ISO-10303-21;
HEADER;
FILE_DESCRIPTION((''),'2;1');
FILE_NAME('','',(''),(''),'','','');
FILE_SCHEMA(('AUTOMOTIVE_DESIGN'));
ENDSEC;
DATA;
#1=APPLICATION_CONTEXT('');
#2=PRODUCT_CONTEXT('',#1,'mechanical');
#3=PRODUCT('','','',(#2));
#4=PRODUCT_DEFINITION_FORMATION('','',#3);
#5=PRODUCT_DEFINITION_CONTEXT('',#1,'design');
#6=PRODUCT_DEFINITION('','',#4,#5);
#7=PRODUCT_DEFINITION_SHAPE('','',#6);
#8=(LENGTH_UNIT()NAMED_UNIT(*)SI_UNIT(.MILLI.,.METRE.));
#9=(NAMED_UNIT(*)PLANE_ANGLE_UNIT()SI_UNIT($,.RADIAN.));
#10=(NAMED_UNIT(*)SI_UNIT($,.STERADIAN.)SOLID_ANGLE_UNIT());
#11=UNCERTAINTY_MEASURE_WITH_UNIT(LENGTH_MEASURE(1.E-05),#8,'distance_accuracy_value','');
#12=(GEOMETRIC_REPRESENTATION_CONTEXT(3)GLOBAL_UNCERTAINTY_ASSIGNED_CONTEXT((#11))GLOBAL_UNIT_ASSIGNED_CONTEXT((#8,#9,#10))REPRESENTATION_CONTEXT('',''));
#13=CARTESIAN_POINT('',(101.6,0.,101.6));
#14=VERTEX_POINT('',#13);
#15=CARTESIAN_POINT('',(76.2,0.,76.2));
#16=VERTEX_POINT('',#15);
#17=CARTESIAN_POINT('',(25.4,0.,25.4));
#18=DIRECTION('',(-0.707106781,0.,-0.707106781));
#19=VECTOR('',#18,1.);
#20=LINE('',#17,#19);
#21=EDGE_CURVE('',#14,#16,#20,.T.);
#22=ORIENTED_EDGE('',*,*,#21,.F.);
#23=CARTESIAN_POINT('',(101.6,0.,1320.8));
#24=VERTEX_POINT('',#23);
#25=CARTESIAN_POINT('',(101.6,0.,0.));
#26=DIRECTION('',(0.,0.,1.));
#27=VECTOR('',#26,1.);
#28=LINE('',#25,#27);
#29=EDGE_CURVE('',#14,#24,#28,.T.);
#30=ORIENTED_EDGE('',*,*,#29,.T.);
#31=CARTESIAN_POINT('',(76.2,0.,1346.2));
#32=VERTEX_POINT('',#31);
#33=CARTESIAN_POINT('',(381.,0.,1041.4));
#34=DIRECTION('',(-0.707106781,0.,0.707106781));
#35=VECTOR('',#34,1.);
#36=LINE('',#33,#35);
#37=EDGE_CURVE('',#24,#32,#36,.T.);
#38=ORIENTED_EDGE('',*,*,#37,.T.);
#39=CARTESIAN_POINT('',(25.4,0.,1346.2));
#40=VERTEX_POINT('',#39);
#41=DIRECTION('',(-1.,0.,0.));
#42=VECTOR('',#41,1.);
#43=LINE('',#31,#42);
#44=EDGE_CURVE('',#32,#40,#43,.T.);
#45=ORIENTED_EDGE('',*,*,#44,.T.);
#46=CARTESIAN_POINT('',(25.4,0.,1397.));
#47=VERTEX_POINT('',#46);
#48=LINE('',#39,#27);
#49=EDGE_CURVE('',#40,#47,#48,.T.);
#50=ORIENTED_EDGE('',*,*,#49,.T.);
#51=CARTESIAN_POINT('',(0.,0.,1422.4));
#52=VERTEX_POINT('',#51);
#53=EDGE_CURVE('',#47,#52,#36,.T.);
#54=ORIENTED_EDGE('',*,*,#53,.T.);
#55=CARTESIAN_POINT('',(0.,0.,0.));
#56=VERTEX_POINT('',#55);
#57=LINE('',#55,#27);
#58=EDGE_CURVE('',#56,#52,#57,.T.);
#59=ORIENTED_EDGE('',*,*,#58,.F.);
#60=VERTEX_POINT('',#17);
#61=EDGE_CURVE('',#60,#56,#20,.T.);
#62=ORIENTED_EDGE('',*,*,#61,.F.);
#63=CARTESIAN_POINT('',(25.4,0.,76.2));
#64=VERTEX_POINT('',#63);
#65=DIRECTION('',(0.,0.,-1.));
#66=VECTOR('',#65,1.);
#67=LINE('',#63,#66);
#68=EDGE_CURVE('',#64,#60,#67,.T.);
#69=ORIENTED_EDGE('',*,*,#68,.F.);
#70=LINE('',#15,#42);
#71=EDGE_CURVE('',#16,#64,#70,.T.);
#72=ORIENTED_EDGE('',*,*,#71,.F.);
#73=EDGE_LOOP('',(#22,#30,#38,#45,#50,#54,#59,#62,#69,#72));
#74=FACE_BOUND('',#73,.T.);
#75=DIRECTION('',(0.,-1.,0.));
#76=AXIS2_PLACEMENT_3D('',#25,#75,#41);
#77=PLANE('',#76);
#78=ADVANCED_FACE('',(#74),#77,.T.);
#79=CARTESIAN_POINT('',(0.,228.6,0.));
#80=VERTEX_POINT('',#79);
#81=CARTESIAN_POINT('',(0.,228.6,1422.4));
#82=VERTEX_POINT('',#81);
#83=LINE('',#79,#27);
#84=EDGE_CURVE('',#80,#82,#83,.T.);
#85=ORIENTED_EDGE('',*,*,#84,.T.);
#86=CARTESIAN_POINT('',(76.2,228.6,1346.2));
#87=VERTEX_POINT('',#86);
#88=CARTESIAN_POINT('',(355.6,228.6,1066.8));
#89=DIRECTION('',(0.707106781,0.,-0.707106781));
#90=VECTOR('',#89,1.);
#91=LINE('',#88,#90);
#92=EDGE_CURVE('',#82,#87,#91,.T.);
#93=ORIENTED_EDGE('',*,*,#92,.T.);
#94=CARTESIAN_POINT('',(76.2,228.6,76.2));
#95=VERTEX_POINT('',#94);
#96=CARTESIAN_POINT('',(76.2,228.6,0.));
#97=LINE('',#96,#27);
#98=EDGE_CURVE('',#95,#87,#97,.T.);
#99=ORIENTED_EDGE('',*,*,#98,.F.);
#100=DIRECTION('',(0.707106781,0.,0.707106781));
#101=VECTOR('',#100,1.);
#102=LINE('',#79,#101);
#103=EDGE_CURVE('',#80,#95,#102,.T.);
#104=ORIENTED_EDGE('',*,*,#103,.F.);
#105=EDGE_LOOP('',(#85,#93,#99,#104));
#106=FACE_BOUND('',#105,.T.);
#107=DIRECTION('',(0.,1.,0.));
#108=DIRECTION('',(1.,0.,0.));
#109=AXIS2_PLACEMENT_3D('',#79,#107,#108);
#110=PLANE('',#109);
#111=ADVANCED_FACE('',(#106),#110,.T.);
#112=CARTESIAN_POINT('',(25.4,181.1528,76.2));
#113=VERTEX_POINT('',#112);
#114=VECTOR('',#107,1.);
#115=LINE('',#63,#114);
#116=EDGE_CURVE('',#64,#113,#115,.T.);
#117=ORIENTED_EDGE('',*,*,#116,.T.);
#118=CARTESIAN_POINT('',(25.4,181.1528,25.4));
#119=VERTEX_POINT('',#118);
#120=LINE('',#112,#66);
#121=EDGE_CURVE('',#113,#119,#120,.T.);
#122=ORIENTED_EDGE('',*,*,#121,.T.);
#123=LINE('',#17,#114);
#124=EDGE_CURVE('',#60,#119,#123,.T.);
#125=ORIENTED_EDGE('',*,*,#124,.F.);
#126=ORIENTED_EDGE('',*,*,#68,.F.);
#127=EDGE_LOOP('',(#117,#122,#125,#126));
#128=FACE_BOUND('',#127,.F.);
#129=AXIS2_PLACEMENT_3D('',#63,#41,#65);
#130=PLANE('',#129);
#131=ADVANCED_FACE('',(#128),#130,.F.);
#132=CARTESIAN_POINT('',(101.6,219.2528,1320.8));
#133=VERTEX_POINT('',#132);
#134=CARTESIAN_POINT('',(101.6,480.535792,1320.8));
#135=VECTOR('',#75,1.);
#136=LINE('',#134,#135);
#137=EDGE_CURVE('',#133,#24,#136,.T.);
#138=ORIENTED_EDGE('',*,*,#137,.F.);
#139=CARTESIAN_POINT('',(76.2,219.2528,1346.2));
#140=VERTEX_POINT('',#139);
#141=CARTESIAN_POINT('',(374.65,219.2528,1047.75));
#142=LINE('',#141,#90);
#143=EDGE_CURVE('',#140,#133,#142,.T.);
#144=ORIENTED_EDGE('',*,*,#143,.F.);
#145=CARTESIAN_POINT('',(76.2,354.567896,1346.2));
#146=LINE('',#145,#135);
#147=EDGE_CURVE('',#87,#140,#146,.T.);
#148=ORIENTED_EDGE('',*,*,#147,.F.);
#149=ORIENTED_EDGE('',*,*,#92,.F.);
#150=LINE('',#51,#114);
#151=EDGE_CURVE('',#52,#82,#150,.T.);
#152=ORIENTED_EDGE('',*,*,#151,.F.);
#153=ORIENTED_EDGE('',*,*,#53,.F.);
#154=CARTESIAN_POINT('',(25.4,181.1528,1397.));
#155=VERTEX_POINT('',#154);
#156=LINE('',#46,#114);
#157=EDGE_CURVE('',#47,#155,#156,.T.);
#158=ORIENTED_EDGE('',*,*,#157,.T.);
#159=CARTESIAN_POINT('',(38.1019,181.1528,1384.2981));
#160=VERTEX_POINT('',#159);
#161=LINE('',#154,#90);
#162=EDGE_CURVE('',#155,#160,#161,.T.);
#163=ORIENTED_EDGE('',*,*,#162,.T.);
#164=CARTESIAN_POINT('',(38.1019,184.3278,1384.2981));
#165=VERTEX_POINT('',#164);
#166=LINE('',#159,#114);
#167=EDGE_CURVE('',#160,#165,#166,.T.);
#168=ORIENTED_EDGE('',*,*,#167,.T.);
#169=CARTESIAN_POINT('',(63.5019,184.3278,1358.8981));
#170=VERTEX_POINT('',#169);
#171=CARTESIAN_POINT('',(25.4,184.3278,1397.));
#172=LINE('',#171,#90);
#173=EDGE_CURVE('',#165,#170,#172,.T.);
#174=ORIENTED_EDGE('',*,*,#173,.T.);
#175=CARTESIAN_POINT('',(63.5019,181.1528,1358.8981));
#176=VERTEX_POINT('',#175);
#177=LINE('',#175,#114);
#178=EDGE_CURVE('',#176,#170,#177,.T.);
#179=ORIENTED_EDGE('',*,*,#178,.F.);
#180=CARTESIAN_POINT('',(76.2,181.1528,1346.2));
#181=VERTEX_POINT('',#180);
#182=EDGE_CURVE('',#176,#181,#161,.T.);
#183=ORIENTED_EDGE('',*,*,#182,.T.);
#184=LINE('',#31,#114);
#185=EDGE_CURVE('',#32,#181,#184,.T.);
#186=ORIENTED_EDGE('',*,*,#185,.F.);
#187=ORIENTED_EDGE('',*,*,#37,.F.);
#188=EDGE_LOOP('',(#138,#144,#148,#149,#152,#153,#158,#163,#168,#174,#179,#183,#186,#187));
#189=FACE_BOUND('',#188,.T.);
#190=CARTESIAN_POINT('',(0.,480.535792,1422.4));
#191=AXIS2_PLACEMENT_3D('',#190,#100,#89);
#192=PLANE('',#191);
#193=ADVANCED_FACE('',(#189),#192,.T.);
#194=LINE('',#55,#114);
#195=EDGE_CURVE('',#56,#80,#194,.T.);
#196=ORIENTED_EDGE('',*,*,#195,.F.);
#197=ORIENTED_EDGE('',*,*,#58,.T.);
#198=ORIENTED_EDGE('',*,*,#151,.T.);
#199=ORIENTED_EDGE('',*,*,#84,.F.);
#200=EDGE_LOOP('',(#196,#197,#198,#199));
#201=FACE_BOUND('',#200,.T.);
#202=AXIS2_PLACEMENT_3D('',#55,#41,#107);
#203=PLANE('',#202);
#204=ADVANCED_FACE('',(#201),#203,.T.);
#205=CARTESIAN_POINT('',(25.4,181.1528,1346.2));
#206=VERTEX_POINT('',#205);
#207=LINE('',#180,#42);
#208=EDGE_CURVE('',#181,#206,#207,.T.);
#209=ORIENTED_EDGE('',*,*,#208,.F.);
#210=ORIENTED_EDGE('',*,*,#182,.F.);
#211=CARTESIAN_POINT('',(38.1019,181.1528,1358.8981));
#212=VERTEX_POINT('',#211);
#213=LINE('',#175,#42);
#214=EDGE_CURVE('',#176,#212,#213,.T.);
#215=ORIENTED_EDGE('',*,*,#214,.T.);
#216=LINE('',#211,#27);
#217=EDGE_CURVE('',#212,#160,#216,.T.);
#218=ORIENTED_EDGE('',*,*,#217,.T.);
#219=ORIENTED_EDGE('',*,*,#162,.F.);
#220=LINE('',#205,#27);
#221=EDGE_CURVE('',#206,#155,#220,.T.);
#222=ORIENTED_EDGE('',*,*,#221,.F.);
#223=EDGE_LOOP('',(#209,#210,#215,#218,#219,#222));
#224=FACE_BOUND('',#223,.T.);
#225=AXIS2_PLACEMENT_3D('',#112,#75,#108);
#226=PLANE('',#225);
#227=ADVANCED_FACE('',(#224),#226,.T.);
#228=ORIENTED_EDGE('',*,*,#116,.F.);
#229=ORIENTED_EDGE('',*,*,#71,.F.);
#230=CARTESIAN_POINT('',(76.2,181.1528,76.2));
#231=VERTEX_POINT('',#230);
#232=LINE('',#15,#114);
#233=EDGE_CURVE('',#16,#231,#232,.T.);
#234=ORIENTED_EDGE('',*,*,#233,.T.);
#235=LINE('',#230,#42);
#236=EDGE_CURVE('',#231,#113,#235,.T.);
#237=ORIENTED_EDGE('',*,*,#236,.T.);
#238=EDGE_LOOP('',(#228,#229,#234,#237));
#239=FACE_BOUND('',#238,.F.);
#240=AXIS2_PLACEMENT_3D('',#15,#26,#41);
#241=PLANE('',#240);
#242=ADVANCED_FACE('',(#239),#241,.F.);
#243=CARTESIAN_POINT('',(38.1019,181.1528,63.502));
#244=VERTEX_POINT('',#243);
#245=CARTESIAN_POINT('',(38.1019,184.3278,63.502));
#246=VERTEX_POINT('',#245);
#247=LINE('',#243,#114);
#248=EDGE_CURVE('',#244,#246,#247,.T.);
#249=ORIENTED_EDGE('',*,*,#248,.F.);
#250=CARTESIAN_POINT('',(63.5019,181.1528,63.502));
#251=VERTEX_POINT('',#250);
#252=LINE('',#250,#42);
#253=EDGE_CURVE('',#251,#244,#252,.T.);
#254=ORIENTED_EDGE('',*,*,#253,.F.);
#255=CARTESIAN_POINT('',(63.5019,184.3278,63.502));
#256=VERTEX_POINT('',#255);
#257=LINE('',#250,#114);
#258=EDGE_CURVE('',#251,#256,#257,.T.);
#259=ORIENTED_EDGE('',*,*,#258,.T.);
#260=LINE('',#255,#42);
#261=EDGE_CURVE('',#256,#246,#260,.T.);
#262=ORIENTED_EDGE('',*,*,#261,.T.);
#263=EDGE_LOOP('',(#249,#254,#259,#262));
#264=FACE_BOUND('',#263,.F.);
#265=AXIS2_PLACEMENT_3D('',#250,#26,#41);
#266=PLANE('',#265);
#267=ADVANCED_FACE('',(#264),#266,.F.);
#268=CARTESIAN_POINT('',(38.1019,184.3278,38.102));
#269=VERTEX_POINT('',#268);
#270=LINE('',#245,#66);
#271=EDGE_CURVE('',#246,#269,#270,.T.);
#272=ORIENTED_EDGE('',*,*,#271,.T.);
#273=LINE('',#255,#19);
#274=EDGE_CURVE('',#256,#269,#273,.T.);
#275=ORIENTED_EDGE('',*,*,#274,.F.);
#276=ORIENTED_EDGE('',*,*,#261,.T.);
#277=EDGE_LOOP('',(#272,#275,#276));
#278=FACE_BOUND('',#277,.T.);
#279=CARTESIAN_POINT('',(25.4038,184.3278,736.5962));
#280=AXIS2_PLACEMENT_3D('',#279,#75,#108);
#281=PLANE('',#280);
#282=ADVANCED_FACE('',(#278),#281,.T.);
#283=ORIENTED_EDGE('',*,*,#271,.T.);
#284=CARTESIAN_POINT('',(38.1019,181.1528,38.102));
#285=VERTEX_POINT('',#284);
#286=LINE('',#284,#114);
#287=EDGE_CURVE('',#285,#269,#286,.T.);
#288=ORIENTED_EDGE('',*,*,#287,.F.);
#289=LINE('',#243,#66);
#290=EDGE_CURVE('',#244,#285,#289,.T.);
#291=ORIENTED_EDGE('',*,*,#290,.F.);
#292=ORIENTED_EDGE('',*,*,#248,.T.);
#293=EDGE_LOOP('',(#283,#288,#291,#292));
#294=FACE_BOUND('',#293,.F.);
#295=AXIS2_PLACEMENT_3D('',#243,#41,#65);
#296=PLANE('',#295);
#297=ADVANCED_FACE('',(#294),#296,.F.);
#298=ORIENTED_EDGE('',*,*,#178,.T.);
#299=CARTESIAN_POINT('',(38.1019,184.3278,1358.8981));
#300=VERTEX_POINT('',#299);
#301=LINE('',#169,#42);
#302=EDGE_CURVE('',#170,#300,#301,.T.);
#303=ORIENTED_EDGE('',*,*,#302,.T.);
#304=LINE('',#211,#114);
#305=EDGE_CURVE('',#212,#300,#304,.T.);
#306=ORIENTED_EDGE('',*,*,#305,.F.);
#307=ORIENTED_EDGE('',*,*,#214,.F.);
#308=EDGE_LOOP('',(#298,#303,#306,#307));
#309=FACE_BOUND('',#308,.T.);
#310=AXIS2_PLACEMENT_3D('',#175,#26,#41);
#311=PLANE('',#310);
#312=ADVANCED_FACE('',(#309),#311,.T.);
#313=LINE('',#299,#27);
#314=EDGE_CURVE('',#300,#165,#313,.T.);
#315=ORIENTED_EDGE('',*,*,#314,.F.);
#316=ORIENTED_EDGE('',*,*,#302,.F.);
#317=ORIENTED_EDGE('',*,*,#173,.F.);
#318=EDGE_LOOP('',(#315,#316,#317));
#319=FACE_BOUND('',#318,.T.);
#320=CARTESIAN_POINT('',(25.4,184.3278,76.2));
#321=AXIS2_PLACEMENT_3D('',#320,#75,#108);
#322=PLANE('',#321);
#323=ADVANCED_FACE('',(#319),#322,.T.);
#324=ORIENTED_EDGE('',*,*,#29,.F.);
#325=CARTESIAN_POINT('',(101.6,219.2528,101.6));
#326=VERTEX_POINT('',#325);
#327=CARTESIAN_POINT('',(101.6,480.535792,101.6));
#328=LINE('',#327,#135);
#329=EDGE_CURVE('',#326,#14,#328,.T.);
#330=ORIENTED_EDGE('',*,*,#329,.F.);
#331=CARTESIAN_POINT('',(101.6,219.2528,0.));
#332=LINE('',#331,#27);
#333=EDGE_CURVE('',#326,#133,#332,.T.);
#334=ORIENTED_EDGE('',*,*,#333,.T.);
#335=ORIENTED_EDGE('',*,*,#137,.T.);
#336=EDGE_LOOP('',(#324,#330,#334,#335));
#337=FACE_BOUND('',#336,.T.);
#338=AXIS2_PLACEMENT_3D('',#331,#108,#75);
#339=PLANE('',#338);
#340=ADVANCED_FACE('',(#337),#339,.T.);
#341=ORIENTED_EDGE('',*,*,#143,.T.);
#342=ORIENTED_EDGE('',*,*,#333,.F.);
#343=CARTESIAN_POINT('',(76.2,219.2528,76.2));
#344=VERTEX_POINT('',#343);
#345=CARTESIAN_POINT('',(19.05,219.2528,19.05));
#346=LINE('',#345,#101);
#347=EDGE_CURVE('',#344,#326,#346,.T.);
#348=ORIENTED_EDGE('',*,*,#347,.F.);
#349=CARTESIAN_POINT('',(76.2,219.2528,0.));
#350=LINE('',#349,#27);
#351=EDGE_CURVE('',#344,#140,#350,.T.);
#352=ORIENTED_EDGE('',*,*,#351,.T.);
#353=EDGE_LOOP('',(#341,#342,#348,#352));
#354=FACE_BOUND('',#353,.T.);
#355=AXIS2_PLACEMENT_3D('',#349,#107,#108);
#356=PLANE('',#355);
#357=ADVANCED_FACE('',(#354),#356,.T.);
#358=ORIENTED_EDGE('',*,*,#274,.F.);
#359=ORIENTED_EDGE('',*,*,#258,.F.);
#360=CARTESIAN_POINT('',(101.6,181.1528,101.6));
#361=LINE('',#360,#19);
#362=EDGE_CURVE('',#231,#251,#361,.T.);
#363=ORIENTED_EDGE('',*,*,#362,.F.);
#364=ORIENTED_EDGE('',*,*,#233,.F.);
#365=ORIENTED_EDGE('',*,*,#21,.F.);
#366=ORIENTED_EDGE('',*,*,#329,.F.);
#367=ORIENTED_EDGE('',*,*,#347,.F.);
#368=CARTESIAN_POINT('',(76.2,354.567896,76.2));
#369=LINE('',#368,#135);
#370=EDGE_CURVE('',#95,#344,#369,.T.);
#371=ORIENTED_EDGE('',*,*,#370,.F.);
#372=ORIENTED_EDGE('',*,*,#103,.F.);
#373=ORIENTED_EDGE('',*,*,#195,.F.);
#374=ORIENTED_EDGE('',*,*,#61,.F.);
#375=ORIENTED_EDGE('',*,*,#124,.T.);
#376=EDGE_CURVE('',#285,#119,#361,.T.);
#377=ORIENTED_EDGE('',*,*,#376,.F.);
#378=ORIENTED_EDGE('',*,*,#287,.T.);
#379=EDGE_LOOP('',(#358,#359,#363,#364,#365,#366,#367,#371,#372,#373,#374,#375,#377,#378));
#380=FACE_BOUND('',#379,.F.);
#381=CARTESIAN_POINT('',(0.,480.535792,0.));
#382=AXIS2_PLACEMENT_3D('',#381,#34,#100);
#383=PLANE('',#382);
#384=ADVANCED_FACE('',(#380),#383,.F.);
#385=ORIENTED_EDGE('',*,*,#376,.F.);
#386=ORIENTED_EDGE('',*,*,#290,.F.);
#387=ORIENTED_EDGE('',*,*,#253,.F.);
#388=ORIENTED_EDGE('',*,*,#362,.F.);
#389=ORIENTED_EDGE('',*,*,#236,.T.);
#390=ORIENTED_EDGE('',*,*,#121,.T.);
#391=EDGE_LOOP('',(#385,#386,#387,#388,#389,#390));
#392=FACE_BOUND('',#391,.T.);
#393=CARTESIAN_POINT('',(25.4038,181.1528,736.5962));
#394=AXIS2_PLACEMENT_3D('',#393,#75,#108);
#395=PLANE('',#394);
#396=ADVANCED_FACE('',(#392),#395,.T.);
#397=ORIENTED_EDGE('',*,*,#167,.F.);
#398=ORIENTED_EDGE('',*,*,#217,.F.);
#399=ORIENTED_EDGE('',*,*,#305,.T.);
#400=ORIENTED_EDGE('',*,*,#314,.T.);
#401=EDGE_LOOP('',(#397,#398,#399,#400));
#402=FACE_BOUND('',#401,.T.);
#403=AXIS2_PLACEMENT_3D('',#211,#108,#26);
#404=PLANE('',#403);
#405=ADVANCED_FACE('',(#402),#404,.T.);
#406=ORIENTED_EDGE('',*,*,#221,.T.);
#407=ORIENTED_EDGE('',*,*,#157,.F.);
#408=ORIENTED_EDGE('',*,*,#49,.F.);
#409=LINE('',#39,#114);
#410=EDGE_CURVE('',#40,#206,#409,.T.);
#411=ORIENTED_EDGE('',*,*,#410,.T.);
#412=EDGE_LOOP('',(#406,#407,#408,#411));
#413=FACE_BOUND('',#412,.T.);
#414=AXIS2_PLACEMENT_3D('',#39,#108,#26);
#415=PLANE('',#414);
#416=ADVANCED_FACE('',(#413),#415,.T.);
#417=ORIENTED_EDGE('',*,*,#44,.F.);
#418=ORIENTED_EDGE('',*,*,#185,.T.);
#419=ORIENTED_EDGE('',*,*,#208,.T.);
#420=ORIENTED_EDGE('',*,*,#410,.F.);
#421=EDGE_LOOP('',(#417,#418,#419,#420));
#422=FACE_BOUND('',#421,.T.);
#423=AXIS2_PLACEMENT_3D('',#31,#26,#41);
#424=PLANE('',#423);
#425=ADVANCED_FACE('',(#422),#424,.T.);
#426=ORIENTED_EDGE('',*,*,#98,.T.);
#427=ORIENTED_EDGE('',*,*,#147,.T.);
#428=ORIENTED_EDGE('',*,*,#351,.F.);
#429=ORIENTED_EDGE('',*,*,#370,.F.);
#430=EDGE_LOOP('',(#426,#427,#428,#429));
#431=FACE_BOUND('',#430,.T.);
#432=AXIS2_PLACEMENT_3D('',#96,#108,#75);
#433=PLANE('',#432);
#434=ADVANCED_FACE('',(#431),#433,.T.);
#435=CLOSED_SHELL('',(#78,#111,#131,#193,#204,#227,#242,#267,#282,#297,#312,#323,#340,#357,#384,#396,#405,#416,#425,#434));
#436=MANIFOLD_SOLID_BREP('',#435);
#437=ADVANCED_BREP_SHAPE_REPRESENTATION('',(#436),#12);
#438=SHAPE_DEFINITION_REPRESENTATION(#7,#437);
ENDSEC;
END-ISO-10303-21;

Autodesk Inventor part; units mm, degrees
ref_plane "YZ Plane" through (0, 0, 0) normal (1, 0, 0) x (0, 1, 0)
ref_plane "XZ Plane" through (0, 0, 0) normal (0, 1, 0) x (-1, 0, 0)
sketch "Sketch1" plane through (0, 0, 0) normal (0, 0, 1) x (1, 0, 0)
  line L0 (0, 0) -> (0, 228.6)
  line L1 (0, 228.6) -> (76.2, 228.6)
  line L2 (76.2, 228.6) -> (76.2, 219.2528)
  line L3 (76.2, 219.2528) -> (101.6, 219.2528)
  line L4 (101.6, 219.2528) -> (101.6, 0)
  line L5 (101.6, 0) -> (0, 0)
  dimension "d0" = 228.6
  dimension "d1" = 76.2
  dimension "d2" = 9.3472
  dimension "d3" = 25.4
extrude "Extrusion1" add sketch "Sketch1" along normal blind 1422.4
ref_plane "Work Plane2" through (25.4038, 0, 736.5962) normal (0, -1, 0) x (1, 0, 0)
sketch "Sketch7" plane through (25.4038, 0, 736.5962) normal (0, -1, 0) x (1, 0, 0)
  line L0 (76.1962, -634.9962) -> (50.7962, -660.3962)
  line L1 (50.7962, -660.3962) -> (-0.0038, -660.3962)
  line L2 (76.1962, -634.9962) -> (-25.4038, -736.5962) projected
  line L3 (76.1962, -736.5962) -> (76.1962, 584.2038) projected
  line L4 (-0.0038, -660.3962) -> (-0.0038, -711.1962)
  line L5 (-0.0038, -711.1962) -> (50.7962, -660.3962)
  dimension "d39" = 50.8
  dimension "d41" = 90
  dimension "d42" = 50.8
extrude "Extrusion5" cut sketch "Sketch7" against normal blind 181.1528
sketch "Sketch8" plane through (25.4, 0, 76.2) normal (0, -1, 0) x (1, 0, 0)
  line L0 (76.2, -76.2) -> (76.2, 1346.2) projected
  line L1 (76.2, 1244.6) -> (50.8, 1270)
  line L2 (50.8, 1270) -> (0, 1270)
  line L3 (0, 1270) -> (0, 1320.8)
  line L4 (0, 1320.8) -> (50.8, 1270)
  line L5 (-25.4, 1346.2) -> (76.2, 1244.6) projected
  point P0 (-25.4, -76.2)
  point P1 (76.2, 25.4)
  dimension "d48" = 90
  dimension "d49" = 50.8
extrude "Extrusion6" cut sketch "Sketch8" against normal blind 181.1528
chamfer "Chamfer6" distance 101.6 angle 45 1 edges at (101.6, 109.6264, 1422.4)
chamfer "Chamfer7" distance 101.6 angle 45 1 edges at (101.6, 109.6264, 0)
sketch "Sketch9" plane through (25.4, 181.1528, 76.2) normal (0, -1, 0) x (1, 0, 0)
  line L0 (32.8422, -17.9578) -> (7.4422, -17.9578)
  line L1 (7.4422, -17.9578) -> (7.4422, -43.3578)
  line L2 (32.8422, -17.9578) -> (7.4422, -43.3578)
  line L3 (-25.4, -76.2) -> (50.8, 0) projected
  line L4 (50.8, 0) -> (38.1019, -12.6981)
  line L5 (50.8, 1270) -> (76.2, 1244.6) projected
  line L6 (50.8, 1270) -> (38.1019, 1282.6981)
  line L7 (0, 1320.8) -> (50.8, 1270) projected
  line L8 (38.1019, 1282.6981) -> (12.7019, 1282.6981)
  line L9 (12.7019, 1282.6981) -> (12.7019, 1308.0981)
  line L10 (38.1019, 1282.6981) -> (12.7019, 1308.0981)
  dimension "d63" = 0
  dimension "d64" = 25.4
  dimension "d65" = 17.9578
  dimension "d66" = 17.9578
  dimension "d67" = 25.4
extrude "Extrusion7" cut sketch "Sketch9" against normal blind 3.175 contours L7 L8 L9
sketch "Sketch10" plane through (25.4038, 181.1528, 736.5962) normal (0, -1, 0) x (1, 0, 0)
  line L0 (76.1962, -634.9962) -> (50.7962, -660.3962) projected
  line L1 (50.7962, -660.3962) -> (38.0981, -673.0942)
  line L2 (38.0981, -673.0942) -> (12.6981, -673.0942)
  line L3 (12.6981, -673.0942) -> (12.6981, -698.4942)
  line L4 (38.0981, -673.0942) -> (12.6981, -698.4942)
  point P0 (-25.4038, -736.5962)
  dimension "d70" = 17.9578
  dimension "d71" = 25.4
  dimension "d72" = 25.4
extrude "Extrusion8" cut sketch "Sketch10" against normal blind 3.175
properties part number "SideLength" material "Wood (Birch)"
